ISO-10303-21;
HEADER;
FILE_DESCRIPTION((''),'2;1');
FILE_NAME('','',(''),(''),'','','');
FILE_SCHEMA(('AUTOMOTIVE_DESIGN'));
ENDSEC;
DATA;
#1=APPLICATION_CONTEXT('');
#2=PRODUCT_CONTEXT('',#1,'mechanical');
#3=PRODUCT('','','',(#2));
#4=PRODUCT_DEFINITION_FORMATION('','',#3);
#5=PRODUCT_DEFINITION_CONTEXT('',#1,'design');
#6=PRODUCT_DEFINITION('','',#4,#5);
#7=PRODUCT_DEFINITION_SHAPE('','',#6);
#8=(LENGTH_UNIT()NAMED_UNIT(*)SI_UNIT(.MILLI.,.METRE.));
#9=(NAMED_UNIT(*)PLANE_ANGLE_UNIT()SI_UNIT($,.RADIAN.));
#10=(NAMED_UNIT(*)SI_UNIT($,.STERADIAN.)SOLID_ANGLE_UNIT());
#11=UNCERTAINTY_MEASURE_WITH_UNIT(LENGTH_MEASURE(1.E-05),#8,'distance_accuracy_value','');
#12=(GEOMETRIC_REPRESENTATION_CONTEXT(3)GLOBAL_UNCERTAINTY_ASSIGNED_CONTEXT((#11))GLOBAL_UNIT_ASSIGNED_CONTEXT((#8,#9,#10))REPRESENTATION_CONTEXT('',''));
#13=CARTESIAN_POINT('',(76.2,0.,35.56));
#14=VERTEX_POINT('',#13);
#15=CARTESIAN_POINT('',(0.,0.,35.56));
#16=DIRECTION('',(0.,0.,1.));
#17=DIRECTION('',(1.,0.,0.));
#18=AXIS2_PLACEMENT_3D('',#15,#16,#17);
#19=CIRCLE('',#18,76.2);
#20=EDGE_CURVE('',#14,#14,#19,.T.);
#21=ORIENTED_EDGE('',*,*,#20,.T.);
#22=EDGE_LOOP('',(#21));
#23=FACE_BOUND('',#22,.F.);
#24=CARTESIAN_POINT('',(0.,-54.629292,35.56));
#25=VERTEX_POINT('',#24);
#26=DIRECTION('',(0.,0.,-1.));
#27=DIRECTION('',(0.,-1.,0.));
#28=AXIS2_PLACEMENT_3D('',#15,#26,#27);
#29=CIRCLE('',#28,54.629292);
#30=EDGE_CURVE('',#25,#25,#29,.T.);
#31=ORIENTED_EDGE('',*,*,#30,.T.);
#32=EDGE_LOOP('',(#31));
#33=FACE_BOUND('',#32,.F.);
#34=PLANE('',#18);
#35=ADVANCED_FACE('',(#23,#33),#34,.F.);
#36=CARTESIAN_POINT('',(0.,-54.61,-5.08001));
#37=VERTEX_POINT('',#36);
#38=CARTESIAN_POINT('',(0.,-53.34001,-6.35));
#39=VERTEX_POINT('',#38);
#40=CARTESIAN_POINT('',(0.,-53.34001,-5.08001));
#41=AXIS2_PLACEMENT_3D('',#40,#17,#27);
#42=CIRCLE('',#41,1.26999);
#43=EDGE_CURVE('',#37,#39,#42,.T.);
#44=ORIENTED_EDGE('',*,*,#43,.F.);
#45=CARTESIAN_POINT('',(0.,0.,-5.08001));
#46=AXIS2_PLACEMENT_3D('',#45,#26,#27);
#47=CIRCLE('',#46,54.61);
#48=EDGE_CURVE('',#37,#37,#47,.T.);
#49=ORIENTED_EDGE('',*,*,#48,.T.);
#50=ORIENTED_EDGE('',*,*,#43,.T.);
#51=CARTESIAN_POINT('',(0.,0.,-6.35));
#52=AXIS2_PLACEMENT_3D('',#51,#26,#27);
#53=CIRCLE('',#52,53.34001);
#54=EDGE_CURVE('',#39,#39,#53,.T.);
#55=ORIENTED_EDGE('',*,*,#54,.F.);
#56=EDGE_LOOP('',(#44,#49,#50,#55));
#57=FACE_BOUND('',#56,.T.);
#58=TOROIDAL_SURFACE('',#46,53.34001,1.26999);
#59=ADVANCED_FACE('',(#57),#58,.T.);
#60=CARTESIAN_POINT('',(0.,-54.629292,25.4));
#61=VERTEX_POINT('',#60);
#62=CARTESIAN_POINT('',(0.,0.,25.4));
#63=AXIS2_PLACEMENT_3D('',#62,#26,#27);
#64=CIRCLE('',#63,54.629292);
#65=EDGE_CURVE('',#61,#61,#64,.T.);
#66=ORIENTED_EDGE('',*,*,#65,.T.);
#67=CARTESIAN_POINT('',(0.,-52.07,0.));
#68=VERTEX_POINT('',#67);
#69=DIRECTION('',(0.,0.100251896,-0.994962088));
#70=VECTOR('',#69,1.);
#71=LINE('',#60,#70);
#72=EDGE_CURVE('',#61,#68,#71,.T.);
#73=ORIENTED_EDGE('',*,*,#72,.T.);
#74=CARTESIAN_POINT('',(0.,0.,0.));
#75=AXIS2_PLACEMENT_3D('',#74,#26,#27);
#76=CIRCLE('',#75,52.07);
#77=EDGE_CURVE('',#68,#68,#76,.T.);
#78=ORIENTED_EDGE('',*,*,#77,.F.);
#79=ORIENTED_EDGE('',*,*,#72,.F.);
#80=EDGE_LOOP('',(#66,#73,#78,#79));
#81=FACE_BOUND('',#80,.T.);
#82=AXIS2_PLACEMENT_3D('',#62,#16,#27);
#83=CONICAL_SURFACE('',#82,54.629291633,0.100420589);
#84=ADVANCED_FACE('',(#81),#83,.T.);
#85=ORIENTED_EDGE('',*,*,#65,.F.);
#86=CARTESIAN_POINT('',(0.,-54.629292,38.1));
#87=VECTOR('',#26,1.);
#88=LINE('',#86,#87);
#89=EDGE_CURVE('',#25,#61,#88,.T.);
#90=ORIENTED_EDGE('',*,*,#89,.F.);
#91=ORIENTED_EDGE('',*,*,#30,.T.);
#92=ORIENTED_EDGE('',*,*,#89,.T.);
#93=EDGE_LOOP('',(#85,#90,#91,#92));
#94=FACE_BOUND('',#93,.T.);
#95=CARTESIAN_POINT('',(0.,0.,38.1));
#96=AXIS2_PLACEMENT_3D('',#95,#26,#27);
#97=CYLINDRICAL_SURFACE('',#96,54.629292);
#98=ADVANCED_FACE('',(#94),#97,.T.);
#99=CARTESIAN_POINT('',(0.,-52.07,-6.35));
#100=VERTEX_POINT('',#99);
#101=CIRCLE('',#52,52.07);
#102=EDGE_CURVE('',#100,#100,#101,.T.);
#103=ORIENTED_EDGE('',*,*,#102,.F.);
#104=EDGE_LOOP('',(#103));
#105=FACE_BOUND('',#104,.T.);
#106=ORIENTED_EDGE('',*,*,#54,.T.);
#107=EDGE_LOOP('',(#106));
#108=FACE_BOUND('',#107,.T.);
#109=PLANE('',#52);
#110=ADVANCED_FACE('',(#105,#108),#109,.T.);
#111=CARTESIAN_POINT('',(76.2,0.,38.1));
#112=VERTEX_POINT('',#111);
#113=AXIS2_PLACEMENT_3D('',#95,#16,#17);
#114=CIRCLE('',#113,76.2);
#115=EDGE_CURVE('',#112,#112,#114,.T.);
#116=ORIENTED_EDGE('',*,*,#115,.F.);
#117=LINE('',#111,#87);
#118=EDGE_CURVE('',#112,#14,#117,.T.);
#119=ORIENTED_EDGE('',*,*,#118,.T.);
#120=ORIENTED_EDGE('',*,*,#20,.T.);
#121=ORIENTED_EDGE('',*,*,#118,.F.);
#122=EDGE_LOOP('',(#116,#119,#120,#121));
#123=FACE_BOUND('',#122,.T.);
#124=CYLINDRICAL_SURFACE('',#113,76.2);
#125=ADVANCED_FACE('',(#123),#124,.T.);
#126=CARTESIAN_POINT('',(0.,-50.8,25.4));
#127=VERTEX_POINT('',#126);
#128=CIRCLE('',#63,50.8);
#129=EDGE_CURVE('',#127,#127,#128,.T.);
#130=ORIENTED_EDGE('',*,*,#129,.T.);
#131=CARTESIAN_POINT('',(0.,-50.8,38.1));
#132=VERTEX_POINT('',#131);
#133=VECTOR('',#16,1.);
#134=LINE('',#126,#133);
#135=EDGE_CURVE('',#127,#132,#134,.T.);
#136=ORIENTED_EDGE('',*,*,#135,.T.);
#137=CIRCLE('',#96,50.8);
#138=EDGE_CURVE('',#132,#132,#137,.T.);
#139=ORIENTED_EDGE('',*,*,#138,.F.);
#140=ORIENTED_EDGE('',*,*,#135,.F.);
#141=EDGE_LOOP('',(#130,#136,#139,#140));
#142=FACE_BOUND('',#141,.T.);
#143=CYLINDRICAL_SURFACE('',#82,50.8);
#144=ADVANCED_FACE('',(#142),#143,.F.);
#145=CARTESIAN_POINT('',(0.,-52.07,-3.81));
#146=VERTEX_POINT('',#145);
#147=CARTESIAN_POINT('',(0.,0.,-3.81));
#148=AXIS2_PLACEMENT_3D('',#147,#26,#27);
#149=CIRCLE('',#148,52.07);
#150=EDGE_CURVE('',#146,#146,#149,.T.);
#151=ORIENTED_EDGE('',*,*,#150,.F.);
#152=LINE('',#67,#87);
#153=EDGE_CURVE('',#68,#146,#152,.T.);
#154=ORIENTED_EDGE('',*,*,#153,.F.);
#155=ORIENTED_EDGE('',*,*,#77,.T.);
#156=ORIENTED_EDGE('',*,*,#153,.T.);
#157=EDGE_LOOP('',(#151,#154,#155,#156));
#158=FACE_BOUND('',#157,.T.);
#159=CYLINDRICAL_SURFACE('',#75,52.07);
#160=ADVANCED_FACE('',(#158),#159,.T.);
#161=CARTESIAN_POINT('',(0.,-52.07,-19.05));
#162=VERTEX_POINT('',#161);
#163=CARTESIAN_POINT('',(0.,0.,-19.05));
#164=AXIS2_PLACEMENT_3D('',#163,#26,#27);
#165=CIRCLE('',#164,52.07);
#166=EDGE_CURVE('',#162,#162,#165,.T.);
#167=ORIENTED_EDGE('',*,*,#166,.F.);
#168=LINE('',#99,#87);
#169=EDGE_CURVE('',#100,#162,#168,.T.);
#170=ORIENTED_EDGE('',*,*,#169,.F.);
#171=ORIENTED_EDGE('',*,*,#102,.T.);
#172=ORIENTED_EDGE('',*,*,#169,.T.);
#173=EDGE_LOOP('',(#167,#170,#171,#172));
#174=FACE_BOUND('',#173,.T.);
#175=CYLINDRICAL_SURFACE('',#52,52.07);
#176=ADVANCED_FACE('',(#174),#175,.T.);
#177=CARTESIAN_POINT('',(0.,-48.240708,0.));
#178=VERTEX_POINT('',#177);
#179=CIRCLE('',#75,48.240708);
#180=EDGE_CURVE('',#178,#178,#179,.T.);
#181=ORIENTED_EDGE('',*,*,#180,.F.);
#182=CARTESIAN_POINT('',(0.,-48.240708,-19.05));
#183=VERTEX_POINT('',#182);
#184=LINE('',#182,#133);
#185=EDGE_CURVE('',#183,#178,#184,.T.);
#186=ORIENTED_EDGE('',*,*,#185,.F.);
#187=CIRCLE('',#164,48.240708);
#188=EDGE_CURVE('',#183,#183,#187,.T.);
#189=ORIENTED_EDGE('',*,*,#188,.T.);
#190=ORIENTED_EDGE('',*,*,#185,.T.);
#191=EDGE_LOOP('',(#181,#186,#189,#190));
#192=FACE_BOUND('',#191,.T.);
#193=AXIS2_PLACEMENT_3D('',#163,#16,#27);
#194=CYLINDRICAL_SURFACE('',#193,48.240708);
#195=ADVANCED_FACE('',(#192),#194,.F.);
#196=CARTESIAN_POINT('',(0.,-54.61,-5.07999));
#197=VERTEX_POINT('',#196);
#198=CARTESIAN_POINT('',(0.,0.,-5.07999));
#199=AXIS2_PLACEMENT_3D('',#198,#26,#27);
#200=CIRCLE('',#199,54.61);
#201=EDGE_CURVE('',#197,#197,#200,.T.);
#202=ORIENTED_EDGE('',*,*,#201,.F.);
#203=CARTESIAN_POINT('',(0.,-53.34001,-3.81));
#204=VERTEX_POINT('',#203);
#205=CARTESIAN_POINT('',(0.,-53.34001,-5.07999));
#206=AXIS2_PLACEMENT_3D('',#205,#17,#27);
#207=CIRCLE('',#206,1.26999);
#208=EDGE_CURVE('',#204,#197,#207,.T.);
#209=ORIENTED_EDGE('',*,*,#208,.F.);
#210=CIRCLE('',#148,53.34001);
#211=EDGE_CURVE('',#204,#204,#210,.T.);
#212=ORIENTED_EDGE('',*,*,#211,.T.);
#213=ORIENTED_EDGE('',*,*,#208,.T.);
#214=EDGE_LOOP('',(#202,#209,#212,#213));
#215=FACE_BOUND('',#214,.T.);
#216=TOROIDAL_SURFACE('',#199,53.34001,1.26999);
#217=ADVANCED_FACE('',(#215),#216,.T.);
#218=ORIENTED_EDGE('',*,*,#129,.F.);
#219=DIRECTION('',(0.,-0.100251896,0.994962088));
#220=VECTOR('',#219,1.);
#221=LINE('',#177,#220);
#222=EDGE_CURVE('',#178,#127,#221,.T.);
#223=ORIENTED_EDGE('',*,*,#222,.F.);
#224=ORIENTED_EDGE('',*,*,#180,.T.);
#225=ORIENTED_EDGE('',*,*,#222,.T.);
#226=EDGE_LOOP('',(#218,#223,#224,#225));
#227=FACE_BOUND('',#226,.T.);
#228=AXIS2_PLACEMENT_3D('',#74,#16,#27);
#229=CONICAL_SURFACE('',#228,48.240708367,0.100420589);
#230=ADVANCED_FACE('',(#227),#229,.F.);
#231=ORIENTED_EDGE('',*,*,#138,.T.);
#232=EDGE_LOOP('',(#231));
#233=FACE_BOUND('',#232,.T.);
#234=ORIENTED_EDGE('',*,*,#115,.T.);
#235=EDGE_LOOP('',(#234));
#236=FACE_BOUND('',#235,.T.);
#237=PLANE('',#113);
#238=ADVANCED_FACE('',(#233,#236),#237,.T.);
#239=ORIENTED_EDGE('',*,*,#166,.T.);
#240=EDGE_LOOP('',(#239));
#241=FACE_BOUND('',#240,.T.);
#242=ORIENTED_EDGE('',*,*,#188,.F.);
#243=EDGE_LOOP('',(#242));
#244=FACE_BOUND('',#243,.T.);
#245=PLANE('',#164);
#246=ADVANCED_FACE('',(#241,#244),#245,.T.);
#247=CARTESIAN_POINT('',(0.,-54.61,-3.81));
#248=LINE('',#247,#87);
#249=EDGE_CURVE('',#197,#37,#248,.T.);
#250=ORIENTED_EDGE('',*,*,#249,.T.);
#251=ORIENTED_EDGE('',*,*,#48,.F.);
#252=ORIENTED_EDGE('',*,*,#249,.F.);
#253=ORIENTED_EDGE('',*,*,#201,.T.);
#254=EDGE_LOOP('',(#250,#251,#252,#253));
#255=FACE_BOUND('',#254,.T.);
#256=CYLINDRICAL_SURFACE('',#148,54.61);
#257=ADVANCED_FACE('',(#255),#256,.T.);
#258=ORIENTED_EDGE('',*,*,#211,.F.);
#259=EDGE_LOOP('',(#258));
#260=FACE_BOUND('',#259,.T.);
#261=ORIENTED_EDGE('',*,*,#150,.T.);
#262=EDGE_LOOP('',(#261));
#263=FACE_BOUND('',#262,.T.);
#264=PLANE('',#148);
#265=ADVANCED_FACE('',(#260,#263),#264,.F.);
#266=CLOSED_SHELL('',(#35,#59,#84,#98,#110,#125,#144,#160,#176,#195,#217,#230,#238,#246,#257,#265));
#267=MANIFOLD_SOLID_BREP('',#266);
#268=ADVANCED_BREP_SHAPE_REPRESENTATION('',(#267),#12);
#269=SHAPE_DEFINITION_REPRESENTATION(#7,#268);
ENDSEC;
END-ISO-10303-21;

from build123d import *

# Parameters (mm, degrees)
F2_R     = 76.2
F2_R_2   = 54.6292916326
F2_R_3   = 52.1095022643
F3_DEPTH = 2.54
F4_R     = 1.26999


# Not quite as in the source:
# - a fillet or chamfer is up to 0.001 mm smaller than in the source, because OpenCascade refuses the exact size


with BuildPart() as f1:
    # F0 (on Right) → F1 (revolve)
    with BuildSketch(Plane.YZ):
        Polygon((-48.2407083674, -19.05), (-48.2407083674, 0), (-50.8, 25.4), (-50.8, 38.1), (-54.6292916326, 38.1), (-54.6292916326, 25.4), (-52.07, 0), (-52.07, -3.81), (-54.61, -3.81), (-54.61, -6.35), (-52.07, -6.35), (-52.07, -19.05), align=None)
    revolve(axis=Axis((0, 0, 19.0012101084), (0, 0, -1)))

    # F2 (on face) → F3 (join)
    with BuildSketch(Plane.XY.offset(38.1)):
        Circle(F2_R)
        Circle(F2_R_2, mode=Mode.SUBTRACT)
        Circle(F2_R_2)
        Circle(F2_R_3, mode=Mode.SUBTRACT)
    extrude(amount=-F3_DEPTH)

    # F4 (radius 1.27 in the source; OpenCascade refuses exactly that, so slightly less here)
    f4_edges = [f1.edges().sort_by_distance(p)[0] for p in [
        (0, 54.61, -3.81),
        (0, 54.61, -6.35),
    ]]
    fillet(f4_edges, radius=F4_R)


solid = f1.part
